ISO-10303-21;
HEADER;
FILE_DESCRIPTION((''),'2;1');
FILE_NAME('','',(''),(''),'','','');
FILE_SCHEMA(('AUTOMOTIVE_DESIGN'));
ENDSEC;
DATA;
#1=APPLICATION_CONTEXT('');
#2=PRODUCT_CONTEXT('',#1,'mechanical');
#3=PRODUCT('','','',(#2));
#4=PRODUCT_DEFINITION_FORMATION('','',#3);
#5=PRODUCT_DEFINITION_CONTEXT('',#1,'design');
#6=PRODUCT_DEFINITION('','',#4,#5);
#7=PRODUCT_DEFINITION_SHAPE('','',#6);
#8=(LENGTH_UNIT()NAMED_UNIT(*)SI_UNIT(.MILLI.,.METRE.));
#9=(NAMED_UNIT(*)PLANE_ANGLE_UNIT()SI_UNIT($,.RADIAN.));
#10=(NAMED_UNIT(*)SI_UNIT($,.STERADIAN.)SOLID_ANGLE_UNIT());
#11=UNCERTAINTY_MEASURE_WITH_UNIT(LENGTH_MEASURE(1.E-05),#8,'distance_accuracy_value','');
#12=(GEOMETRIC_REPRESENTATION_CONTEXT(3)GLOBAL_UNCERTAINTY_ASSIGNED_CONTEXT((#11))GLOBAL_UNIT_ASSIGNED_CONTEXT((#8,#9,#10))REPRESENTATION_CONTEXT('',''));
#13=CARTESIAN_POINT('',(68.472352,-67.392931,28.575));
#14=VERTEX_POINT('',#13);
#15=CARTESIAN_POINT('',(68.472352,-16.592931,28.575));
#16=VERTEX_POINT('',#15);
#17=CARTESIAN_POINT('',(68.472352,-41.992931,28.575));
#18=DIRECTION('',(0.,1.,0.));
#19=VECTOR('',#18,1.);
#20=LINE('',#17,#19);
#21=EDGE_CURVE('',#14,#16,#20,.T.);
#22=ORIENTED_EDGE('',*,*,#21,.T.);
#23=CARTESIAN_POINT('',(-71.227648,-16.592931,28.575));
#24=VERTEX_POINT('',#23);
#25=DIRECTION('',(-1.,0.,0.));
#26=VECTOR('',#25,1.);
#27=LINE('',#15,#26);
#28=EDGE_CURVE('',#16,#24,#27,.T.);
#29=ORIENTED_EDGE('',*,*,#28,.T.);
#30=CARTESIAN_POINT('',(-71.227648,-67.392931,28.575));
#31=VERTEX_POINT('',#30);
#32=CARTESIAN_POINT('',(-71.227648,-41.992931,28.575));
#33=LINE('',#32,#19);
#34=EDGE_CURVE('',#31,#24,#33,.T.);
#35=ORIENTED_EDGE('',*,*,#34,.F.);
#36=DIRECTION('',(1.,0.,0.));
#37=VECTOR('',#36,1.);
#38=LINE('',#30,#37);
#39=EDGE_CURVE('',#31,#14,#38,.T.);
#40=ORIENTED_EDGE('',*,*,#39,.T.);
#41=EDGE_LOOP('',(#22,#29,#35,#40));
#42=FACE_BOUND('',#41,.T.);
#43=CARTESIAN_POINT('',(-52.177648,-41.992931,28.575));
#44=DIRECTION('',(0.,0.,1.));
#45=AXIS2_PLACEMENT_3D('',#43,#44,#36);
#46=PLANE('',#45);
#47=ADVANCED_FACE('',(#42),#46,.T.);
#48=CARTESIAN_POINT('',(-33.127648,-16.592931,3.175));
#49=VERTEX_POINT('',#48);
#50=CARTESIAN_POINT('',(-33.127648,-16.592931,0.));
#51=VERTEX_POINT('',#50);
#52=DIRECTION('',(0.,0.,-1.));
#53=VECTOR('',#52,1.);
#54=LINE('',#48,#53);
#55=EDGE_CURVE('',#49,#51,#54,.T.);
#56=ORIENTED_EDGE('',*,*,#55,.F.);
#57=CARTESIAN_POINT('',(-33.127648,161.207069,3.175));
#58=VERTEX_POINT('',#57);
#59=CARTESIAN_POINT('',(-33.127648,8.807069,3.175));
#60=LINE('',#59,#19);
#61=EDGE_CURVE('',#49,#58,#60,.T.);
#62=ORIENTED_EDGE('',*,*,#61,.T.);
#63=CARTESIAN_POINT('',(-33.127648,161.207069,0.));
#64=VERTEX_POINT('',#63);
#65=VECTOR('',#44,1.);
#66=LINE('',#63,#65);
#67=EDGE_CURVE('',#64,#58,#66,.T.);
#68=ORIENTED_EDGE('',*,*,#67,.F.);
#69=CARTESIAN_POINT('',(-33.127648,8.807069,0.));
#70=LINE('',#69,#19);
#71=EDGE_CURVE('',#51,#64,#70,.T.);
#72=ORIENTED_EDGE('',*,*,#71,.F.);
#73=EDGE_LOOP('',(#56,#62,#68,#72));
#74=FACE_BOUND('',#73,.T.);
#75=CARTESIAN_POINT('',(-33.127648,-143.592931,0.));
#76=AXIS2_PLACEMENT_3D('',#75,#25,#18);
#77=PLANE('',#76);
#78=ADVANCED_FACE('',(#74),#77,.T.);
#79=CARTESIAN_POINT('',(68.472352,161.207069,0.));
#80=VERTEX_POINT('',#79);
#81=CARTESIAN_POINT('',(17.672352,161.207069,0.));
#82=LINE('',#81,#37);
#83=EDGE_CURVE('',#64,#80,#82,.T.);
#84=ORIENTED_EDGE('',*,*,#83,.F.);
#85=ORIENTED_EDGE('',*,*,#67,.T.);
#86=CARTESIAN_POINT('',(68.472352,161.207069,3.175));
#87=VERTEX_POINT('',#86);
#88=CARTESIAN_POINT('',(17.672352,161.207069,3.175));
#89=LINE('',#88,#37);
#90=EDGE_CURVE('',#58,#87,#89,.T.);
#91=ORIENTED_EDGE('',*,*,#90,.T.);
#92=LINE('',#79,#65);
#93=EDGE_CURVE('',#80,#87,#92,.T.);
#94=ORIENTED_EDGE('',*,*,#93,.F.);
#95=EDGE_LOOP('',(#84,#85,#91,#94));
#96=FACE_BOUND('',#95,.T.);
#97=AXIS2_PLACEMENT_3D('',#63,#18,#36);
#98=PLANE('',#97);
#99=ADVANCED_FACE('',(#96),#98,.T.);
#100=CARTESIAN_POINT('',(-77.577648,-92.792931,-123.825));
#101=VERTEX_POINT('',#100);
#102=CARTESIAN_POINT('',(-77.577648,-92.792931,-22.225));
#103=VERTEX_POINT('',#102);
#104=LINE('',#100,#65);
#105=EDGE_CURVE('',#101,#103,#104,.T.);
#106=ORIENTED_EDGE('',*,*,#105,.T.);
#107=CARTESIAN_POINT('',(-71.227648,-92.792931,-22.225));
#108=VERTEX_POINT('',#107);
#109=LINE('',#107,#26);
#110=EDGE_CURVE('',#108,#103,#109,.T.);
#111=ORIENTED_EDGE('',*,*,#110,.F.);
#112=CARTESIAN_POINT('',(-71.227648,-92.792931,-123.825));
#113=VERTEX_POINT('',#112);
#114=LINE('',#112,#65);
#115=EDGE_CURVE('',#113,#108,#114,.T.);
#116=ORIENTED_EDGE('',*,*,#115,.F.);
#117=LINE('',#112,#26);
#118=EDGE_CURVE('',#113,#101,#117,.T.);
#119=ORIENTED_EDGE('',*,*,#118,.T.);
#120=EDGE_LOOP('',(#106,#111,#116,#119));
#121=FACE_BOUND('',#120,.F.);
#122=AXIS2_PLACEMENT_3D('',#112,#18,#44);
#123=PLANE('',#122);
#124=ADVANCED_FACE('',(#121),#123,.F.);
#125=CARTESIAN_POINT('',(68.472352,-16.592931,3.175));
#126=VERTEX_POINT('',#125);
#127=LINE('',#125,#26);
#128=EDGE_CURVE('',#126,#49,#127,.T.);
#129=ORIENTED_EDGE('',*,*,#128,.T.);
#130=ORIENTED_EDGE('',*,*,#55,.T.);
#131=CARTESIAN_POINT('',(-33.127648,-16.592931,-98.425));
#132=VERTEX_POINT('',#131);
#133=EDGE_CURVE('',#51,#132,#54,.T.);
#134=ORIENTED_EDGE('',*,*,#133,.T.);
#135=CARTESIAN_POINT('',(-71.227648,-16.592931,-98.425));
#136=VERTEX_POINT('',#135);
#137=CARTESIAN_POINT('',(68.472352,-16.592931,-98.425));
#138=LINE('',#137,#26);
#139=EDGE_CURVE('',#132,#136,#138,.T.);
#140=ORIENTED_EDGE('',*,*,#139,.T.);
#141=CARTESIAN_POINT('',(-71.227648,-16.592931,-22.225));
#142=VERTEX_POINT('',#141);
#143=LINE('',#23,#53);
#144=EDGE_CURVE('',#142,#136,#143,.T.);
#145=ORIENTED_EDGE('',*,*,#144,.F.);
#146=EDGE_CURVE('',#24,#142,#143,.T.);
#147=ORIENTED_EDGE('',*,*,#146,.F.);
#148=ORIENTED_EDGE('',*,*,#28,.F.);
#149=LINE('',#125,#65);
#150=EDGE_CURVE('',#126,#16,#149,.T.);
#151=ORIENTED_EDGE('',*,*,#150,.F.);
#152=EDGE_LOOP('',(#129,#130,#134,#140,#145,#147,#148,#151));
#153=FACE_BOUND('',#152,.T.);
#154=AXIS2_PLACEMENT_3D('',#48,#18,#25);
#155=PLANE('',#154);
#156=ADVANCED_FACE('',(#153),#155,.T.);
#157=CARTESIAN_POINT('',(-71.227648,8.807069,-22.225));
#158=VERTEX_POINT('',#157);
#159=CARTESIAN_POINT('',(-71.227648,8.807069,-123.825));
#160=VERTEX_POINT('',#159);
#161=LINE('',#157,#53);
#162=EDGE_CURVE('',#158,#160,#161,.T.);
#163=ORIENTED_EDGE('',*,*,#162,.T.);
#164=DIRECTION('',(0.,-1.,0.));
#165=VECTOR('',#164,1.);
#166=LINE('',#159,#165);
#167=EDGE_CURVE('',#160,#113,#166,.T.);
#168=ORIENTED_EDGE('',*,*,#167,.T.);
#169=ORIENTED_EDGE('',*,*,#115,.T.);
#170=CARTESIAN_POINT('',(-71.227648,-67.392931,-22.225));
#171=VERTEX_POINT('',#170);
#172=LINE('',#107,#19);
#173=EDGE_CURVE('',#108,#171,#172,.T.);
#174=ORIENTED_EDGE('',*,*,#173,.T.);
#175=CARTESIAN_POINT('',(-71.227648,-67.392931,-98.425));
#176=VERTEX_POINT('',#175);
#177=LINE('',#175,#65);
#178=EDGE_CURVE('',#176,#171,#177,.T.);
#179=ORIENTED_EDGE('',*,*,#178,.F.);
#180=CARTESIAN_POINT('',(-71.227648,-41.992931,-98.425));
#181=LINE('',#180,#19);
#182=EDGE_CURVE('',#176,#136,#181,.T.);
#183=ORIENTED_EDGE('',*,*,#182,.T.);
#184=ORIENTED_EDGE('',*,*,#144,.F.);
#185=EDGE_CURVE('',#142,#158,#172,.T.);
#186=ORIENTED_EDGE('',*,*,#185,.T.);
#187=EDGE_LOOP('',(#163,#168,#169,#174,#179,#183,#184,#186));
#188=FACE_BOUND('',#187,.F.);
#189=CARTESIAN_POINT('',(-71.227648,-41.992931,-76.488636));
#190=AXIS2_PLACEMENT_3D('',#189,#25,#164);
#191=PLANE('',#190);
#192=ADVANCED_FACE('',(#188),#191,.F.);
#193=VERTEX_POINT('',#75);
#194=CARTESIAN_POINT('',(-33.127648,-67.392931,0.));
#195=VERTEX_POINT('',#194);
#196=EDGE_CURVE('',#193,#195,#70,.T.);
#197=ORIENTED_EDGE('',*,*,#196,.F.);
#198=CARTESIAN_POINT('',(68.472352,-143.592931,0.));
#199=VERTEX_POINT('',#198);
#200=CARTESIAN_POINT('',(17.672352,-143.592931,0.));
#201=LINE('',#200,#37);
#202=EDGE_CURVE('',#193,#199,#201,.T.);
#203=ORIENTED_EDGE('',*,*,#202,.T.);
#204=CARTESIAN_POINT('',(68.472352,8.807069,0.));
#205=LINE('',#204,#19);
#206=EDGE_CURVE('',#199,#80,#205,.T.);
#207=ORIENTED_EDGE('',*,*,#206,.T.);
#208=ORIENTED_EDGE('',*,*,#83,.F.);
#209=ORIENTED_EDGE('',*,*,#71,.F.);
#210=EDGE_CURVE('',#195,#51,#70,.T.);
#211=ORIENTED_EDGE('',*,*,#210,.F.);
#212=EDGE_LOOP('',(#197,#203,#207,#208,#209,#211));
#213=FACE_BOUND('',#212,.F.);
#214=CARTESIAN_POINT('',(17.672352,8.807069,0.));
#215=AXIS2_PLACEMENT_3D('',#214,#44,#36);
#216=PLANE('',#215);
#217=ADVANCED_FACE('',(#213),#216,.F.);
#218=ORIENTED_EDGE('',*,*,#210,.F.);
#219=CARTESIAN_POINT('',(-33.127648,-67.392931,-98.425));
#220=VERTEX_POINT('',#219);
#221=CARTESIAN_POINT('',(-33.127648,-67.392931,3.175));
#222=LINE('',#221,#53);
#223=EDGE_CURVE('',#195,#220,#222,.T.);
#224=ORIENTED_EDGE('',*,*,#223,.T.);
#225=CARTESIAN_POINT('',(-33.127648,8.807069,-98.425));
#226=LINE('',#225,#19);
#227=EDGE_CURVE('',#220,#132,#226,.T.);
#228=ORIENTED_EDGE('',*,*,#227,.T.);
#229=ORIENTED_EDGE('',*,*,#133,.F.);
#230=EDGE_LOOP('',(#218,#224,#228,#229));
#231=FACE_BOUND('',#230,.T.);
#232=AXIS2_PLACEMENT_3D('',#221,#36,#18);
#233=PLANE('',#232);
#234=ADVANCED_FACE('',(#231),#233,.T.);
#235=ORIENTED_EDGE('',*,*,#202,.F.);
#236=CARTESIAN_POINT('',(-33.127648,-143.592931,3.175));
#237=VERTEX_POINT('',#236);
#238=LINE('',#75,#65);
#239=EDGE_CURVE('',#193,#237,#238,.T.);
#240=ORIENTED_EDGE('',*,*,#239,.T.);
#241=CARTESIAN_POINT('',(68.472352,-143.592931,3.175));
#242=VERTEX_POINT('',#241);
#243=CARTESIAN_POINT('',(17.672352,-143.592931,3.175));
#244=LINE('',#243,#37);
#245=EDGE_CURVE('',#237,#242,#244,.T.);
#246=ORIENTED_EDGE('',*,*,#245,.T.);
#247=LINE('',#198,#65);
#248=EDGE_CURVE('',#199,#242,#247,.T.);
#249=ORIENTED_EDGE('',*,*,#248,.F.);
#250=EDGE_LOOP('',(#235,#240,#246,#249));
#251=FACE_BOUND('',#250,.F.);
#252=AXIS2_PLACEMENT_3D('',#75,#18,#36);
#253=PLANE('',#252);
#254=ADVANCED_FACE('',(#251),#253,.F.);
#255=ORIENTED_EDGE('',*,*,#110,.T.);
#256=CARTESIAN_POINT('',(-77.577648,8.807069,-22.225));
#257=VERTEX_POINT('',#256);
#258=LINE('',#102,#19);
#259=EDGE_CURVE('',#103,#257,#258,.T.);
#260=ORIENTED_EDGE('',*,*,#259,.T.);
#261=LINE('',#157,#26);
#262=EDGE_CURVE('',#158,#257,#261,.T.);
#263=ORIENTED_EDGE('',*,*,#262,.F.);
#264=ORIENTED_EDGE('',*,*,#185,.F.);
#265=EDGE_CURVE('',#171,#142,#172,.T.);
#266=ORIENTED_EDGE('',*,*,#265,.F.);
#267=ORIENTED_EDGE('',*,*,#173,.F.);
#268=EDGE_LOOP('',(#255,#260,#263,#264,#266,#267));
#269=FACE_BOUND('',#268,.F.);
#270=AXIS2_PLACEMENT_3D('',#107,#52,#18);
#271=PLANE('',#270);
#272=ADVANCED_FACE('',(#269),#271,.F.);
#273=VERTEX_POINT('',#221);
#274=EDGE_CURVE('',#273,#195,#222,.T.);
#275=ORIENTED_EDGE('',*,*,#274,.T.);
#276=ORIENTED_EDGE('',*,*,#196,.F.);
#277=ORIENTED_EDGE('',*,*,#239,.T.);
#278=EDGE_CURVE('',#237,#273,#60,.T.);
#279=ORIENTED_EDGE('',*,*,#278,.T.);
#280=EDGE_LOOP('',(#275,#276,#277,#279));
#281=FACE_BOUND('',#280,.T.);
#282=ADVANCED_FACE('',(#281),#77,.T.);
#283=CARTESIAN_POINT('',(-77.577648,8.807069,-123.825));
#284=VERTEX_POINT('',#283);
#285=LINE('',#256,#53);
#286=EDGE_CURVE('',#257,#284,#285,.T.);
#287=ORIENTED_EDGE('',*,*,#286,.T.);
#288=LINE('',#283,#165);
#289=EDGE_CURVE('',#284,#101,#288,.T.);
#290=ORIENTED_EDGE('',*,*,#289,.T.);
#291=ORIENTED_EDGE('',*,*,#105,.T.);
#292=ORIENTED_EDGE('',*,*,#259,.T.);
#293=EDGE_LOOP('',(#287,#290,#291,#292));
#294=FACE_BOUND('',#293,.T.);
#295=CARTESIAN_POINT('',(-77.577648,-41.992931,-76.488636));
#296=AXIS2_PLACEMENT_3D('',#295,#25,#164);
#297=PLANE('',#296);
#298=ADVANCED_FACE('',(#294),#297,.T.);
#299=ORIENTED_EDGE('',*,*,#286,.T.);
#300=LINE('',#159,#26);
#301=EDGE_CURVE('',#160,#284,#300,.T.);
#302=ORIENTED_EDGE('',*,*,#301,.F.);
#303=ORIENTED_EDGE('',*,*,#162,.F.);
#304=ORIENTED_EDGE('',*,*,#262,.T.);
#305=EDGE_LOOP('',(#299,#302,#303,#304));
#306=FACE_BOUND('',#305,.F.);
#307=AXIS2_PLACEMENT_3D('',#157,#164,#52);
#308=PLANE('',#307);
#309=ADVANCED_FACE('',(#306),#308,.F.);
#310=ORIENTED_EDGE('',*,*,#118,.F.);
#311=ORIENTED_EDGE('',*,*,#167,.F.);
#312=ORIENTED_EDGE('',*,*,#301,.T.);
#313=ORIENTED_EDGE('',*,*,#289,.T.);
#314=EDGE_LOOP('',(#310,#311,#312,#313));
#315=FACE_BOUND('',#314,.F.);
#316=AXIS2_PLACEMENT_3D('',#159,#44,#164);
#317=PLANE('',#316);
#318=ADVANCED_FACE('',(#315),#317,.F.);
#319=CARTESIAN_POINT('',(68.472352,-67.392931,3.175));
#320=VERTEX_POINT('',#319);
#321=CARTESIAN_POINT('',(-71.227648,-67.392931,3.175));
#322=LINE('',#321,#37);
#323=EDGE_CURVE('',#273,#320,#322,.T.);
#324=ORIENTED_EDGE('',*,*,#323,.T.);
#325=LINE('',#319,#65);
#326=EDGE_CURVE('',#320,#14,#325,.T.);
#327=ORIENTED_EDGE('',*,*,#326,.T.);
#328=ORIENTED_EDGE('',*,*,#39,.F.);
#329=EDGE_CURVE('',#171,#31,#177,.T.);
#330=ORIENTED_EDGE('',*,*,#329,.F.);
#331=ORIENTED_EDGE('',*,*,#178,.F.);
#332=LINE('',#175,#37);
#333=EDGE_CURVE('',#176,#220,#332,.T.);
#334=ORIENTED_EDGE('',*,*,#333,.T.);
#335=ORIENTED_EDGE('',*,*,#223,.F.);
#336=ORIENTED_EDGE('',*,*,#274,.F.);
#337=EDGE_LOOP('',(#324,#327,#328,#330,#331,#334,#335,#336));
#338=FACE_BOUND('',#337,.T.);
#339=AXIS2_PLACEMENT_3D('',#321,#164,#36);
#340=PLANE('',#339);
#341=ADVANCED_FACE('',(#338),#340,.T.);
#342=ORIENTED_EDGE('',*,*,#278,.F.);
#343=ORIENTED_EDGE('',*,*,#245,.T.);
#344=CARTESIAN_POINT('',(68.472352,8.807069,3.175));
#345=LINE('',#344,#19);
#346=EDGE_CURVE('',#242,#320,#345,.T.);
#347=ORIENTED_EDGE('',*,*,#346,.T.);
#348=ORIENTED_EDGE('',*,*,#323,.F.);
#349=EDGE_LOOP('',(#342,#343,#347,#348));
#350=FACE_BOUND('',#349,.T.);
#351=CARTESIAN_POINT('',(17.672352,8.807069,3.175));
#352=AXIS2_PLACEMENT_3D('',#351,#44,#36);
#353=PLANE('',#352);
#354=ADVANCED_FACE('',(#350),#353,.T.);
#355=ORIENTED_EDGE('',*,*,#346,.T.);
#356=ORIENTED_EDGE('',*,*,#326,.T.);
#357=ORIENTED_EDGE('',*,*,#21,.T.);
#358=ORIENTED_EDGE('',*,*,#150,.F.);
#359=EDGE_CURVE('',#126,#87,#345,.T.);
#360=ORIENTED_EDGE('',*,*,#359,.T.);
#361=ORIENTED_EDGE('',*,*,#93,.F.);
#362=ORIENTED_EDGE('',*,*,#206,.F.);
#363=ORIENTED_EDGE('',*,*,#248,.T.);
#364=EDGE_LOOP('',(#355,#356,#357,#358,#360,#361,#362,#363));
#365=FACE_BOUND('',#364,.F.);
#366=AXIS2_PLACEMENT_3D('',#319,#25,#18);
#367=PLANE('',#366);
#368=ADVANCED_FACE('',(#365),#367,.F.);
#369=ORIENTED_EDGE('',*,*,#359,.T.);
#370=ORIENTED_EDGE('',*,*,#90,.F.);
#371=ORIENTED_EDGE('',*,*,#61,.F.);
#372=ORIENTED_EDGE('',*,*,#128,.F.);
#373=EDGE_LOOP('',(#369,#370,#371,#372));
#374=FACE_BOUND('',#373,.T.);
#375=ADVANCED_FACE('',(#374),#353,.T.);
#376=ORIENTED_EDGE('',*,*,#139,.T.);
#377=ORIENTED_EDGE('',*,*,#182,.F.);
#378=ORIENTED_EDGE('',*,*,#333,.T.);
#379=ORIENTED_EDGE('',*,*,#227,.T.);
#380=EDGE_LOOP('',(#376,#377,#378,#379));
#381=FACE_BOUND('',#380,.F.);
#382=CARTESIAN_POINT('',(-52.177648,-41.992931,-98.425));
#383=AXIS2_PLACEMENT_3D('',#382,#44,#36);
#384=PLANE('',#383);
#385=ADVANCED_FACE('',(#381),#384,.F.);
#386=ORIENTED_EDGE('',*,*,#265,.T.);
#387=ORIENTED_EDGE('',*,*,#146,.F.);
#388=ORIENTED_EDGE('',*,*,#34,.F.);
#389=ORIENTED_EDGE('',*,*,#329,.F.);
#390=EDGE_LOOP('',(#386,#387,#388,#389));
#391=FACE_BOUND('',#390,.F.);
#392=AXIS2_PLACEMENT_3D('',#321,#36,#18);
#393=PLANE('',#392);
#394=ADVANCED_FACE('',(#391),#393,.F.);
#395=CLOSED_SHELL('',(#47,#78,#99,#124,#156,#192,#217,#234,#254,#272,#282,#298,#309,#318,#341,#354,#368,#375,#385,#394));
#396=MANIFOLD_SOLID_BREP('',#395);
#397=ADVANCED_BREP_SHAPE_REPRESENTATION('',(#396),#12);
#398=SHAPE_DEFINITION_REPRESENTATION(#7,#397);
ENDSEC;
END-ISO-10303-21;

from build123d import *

# Parameters (mm, degrees)
F0_W     = 101.6
F0_H     = 304.8
F1_DEPTH = 3.175
F2_W     = 38.1
F2_H     = 50.8
F2_W_2   = 101.6
F3_DEPTH = 25.4
F4_DEPTH = 101.6
F6_DEPTH = 6.35


# Not quite as in the source:
# - the program builds the solid bodies; features that only make, move or delete a surface that nothing else refers to are left out


with BuildPart() as f1:
    # F0 (on Top) → F1 (new body)
    with BuildSketch(Plane.XY):
        with Locations((17.6723517966, 8.8070686907)):
            Rectangle(F0_W, F0_H)
    extrude(amount=F1_DEPTH)

    # F2 (on face) → F3 (join)
    with BuildSketch(Plane.XY.offset(3.175)):
        with Locations((-52.1776482034, -41.9929313093)):
            Rectangle(F2_W, F2_H)
        with Locations((17.6723517966, -41.9929313093)):
            Rectangle(F2_W_2, F2_H)
    extrude(amount=F3_DEPTH)

    # F4 (add): a face of the model
    f4_faces = [f1.faces().sort_by_distance(p)[0] for p in [
        (-52.1776482034, -41.9929313093, 3.175),
    ]]
    extrude(f4_faces, amount=F4_DEPTH)

    # F5 (on face) → F6 (join)
    with BuildSketch(Plane(origin=(-71.2276482034, 0, 0), x_dir=(0, -1, 0), z_dir=(-1, 0, 0))):
        Polygon((92.7929313093, -123.825), (92.7929313093, -22.225), (67.3929313093, -22.225), (67.3929313093, -98.425), (41.9929313093, -98.425), (16.5929313093, -98.425), (16.5929313093, -22.225), (-8.8070686907, -22.225), (-8.8070686907, -123.825), align=None)
        Polygon((67.3929313093, -98.425), (67.3929313093, -22.225), (16.5929313093, -22.225), (16.5929313093, -98.425), (41.9929313093, -98.425), align=None)
    extrude(amount=F6_DEPTH)


solid = f1.part
